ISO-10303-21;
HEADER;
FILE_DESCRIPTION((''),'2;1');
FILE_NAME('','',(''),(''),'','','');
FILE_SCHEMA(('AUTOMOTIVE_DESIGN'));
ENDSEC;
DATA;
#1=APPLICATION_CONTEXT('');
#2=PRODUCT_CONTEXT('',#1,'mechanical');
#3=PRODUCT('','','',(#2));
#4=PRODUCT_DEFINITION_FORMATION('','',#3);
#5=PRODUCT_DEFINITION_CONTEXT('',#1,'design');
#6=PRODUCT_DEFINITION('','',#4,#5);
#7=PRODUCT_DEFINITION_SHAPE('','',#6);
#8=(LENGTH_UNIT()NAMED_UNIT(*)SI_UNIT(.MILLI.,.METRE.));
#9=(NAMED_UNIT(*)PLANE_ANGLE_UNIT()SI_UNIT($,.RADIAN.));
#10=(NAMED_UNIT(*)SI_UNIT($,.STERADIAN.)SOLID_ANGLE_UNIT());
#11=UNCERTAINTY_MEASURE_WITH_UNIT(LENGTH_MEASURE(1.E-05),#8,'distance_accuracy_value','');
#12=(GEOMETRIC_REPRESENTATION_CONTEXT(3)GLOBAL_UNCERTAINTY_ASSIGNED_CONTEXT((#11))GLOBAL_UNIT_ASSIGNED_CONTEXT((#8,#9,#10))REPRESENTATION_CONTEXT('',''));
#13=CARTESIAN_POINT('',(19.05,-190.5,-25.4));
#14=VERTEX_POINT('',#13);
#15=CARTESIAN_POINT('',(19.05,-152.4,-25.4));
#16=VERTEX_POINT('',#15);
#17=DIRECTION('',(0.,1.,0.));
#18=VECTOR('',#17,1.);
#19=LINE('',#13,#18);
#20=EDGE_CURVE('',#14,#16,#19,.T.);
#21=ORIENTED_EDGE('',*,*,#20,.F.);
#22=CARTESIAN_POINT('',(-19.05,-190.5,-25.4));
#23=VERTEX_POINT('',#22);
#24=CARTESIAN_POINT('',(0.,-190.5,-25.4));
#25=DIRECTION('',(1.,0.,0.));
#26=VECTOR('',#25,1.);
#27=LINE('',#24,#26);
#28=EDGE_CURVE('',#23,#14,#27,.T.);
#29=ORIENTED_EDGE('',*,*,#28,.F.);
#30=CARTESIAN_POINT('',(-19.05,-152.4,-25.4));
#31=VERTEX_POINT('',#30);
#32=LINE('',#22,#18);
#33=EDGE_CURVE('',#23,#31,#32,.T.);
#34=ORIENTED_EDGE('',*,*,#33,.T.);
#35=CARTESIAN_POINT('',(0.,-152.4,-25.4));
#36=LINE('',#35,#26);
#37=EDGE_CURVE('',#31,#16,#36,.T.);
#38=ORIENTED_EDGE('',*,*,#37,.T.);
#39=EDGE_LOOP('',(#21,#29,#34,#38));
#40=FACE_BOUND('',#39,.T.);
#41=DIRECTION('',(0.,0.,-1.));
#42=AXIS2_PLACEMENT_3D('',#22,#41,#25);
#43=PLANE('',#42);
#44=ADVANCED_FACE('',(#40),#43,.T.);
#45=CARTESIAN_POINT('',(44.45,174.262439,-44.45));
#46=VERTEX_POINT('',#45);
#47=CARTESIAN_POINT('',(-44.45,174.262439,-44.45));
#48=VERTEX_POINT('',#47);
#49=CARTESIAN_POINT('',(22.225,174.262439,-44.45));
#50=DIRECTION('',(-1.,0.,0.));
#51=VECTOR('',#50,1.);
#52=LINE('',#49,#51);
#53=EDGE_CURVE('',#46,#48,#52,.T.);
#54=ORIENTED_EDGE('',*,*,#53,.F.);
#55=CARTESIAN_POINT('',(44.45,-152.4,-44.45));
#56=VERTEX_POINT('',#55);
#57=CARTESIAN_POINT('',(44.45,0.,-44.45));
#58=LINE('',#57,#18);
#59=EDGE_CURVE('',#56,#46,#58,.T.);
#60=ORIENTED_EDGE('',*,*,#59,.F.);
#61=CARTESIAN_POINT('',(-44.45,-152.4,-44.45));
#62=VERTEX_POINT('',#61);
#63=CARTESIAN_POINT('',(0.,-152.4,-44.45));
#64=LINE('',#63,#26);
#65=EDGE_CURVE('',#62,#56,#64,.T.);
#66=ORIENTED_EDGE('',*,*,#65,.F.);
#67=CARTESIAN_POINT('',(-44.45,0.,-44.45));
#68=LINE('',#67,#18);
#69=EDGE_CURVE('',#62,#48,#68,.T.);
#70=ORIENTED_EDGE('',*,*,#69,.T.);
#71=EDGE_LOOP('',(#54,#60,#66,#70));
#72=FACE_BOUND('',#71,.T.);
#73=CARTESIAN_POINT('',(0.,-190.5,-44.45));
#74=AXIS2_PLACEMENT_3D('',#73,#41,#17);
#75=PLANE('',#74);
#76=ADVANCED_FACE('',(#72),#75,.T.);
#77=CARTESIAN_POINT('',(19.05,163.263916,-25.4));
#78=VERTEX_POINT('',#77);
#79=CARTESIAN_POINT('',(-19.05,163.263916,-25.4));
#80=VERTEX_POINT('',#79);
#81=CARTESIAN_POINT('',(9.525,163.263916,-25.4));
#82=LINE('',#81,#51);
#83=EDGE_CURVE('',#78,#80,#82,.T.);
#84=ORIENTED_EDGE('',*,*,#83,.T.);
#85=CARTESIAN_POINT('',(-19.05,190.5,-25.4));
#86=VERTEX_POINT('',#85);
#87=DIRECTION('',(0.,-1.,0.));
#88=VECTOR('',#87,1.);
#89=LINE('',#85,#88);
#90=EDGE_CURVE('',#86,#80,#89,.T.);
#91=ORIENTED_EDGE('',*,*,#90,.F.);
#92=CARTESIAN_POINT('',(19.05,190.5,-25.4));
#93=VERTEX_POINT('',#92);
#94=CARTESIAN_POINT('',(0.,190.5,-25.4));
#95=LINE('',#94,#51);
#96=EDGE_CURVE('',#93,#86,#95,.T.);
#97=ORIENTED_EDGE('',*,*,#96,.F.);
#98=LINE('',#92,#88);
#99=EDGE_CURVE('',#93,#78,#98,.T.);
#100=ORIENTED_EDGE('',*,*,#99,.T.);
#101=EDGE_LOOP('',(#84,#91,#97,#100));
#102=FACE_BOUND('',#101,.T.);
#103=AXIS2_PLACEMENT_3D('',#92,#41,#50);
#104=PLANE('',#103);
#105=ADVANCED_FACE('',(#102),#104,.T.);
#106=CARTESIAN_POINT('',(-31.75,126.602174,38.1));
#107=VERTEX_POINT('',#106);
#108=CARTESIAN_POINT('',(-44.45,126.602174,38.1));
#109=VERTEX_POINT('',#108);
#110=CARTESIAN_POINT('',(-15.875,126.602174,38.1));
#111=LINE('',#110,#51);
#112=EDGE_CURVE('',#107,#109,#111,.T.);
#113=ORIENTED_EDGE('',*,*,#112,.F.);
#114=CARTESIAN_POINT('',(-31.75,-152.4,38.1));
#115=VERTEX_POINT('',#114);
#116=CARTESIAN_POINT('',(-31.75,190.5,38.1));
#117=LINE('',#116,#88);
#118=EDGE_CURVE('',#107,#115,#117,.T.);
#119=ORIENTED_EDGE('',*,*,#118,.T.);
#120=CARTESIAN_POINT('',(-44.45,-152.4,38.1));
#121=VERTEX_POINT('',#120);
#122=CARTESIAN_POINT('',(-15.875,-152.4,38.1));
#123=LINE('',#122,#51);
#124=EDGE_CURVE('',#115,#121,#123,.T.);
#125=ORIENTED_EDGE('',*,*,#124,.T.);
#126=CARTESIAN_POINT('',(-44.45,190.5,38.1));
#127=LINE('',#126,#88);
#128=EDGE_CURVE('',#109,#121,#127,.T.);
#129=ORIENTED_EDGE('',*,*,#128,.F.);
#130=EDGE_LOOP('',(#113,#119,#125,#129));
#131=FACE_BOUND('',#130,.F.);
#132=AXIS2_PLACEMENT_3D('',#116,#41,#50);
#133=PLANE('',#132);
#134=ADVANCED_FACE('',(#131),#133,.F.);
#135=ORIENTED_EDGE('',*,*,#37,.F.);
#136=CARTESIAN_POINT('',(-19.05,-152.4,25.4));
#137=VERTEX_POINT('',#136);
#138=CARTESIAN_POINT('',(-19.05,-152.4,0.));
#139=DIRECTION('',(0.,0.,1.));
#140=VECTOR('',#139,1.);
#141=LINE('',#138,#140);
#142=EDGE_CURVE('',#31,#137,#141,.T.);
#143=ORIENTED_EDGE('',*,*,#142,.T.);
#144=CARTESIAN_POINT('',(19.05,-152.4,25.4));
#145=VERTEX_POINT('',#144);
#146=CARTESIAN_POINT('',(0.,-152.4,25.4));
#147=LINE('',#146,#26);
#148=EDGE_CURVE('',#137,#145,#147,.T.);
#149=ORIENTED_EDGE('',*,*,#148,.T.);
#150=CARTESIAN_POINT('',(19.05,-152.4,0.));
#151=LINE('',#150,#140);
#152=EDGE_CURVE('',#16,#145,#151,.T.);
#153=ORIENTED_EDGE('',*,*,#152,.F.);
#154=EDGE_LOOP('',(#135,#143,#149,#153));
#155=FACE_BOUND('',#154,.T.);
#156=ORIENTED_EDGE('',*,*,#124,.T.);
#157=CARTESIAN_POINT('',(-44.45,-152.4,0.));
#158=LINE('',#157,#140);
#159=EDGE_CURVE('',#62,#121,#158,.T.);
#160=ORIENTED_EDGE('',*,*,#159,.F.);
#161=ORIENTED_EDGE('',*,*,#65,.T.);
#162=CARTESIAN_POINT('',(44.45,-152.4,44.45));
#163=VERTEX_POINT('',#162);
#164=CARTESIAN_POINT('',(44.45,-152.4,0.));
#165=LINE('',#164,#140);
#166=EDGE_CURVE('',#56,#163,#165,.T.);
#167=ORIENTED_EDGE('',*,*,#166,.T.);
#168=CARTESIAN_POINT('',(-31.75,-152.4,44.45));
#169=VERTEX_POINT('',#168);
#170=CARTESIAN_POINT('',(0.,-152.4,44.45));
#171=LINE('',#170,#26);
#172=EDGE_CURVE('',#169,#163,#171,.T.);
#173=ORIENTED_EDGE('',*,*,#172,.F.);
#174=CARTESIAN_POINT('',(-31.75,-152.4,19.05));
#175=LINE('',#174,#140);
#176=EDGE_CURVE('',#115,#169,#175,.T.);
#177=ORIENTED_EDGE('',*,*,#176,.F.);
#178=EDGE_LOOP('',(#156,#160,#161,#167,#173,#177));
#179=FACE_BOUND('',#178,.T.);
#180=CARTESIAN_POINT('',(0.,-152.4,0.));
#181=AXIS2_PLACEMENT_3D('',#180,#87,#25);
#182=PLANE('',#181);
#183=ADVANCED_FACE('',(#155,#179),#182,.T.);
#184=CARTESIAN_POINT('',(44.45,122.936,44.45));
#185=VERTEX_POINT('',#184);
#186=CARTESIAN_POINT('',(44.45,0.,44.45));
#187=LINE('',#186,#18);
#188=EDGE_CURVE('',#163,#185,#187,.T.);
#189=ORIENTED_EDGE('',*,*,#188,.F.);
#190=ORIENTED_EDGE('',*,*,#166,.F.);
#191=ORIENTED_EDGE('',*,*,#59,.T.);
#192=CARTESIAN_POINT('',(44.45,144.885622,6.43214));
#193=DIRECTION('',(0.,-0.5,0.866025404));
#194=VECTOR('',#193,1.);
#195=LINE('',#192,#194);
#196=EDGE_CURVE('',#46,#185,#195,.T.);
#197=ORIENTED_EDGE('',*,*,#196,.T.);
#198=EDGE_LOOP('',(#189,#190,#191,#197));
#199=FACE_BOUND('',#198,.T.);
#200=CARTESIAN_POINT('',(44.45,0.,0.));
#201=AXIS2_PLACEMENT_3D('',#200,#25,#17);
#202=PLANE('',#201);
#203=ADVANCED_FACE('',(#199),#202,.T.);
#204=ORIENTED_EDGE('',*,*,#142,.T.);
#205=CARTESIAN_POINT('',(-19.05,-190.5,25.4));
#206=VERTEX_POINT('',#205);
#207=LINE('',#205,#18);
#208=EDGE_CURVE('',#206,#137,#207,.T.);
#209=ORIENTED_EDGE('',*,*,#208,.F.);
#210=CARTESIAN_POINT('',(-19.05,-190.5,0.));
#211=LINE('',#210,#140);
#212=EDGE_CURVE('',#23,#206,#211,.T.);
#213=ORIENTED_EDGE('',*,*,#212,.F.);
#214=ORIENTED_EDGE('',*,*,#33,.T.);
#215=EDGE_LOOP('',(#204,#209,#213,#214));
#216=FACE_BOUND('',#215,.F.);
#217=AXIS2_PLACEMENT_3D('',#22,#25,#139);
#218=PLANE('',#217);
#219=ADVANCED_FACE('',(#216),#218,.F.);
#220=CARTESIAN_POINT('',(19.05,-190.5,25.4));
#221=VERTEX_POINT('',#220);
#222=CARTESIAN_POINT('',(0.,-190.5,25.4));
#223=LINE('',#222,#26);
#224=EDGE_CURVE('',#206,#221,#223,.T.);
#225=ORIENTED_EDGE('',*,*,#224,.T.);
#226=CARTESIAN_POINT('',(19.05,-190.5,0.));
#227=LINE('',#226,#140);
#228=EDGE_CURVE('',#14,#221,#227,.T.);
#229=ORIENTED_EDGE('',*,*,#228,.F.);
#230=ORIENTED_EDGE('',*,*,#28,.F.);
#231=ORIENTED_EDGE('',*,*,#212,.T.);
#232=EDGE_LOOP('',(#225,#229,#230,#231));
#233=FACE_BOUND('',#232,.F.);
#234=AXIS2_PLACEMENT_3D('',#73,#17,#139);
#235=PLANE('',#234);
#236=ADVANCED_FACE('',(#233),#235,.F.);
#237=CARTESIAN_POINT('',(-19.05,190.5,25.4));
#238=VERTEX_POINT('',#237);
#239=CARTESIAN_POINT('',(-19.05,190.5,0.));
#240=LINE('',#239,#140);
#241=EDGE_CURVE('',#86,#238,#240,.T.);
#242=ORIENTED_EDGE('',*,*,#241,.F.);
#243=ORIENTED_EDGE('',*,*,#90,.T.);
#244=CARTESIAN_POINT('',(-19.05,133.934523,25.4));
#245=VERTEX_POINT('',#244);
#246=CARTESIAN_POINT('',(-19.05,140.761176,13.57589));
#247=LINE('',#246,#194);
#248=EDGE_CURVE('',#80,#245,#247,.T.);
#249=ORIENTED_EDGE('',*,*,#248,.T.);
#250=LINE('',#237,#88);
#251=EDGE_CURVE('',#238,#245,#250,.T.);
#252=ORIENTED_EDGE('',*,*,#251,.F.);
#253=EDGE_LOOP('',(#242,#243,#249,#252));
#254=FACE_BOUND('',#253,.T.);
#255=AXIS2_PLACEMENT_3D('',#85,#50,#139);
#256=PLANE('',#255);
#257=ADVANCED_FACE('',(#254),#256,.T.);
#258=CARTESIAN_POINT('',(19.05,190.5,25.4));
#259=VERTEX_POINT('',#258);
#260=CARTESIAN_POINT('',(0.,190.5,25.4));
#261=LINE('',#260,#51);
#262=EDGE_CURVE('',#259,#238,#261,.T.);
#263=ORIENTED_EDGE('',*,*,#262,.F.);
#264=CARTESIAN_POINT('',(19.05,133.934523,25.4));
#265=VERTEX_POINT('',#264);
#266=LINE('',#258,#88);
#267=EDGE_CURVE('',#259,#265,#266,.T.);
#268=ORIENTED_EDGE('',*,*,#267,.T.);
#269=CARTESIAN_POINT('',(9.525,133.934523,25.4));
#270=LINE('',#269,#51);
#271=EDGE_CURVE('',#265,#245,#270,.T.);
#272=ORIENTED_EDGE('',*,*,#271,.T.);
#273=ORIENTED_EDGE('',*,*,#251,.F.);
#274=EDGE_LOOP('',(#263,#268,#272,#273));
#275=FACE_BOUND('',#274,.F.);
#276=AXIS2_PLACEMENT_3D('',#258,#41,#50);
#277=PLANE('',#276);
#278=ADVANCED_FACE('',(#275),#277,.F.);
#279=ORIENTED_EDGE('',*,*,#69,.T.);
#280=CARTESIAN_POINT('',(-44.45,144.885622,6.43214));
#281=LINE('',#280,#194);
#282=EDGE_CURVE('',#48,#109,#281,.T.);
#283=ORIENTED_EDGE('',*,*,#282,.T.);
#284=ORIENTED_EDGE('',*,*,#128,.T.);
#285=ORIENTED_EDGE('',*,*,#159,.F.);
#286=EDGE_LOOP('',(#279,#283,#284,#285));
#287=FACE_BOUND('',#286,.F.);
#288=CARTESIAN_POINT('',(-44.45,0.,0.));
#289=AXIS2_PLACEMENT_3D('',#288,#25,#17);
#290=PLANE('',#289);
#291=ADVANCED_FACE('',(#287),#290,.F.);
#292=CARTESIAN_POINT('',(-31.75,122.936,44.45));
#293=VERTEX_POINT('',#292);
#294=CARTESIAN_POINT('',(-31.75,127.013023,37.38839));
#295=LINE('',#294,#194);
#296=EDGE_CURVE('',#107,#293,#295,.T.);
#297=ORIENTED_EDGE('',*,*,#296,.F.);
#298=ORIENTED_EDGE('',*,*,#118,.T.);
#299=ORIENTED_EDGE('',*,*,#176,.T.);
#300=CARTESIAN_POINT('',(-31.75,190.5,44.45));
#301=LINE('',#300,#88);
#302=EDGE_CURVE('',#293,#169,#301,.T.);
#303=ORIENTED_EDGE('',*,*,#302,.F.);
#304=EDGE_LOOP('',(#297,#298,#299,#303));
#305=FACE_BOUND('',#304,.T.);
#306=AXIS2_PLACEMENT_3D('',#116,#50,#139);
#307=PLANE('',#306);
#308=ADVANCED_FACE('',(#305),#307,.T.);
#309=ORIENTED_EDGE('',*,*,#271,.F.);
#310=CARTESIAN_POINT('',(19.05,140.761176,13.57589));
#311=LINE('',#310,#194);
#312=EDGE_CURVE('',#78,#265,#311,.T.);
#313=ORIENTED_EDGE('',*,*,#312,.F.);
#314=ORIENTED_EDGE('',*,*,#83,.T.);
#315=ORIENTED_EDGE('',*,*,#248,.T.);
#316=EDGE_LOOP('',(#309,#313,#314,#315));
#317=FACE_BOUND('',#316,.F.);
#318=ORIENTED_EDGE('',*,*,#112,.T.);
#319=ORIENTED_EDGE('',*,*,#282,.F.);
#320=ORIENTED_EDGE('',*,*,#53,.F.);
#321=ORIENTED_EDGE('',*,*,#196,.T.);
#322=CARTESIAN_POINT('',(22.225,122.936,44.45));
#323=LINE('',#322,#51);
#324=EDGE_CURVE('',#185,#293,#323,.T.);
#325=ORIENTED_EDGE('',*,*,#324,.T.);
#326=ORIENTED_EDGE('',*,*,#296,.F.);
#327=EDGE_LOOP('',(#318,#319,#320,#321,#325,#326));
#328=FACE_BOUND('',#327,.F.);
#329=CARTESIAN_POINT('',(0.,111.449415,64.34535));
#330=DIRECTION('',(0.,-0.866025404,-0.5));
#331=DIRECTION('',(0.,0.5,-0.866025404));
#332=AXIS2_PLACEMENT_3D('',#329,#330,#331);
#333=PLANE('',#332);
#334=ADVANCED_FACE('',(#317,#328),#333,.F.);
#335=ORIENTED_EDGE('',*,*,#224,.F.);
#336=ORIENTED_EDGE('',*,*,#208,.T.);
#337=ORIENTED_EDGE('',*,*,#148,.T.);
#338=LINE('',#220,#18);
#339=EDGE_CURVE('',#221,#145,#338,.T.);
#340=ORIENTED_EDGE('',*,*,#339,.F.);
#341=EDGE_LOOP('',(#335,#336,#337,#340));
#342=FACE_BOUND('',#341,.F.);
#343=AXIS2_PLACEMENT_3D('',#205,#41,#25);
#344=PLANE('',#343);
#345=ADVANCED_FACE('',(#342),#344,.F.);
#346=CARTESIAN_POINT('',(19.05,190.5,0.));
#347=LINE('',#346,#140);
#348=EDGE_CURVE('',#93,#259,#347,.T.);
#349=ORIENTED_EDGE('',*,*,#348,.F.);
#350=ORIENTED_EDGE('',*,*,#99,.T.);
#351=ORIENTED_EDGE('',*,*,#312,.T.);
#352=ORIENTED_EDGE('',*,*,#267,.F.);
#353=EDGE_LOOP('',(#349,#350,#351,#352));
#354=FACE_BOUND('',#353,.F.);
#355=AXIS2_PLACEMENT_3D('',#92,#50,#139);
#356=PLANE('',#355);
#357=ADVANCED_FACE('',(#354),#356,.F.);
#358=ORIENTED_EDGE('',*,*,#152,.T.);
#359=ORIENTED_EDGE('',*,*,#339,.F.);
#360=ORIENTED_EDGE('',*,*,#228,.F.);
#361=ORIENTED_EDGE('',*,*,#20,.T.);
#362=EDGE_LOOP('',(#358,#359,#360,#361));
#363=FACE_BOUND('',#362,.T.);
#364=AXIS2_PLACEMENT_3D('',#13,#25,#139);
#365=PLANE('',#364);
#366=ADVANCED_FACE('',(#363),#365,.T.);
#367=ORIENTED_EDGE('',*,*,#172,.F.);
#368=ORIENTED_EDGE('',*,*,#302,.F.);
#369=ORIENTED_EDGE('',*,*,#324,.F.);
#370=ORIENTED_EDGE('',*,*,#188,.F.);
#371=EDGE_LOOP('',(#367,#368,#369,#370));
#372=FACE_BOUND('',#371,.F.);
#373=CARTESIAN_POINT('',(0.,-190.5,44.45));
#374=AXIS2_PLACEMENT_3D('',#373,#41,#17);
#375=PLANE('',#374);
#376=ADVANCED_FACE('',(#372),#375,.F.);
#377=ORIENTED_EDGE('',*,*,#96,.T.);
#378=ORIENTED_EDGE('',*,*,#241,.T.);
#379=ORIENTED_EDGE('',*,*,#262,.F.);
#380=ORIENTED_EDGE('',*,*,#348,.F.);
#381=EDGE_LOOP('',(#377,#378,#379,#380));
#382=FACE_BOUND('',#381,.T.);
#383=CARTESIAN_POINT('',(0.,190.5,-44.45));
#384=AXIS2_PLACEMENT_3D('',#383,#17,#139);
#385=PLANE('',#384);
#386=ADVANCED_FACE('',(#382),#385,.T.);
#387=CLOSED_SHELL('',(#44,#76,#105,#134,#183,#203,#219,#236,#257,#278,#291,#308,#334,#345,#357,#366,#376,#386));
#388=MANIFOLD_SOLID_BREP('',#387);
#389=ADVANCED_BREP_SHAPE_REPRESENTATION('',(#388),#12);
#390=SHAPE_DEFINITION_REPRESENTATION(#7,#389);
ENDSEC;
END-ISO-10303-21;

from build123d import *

# Parameters (mm, degrees)
F0_W     = 381
F0_H     = 88.9
F1_DEPTH = 44.45
F5_W     = 12.7
F5_H     = 6.35
F6_DEPTH = 381.001
F4_W     = 88.9
F4_H     = 88.9
F4_W_2   = 38.1
F4_H_2   = 50.8
F7_REACH = 193.287585695
F8_W     = 88.9
F8_H     = 88.9
F8_W_2   = 38.1
F8_H_2   = 50.8
F9_DEPTH = 38.1


with BuildPart() as f1:
    # F0 (on Right) → F1 (new body, symmetric)
    with BuildSketch(Plane.YZ):
        Rectangle(F0_W, F0_H)
    extrude(amount=F1_DEPTH, both=True)

    # F5 (on face) → F6 (cut, through all)
    with BuildSketch(Plane(origin=(0, 190.5, 0), x_dir=(-1, 0, 0), z_dir=(0, 1, 0))):
        with Locations((38.1, 41.275)):
            Rectangle(F5_W, F5_H)
    extrude(amount=-F6_DEPTH, mode=Mode.SUBTRACT)

    f7_end = Plane(origin=(0, 111.4494145991, 64.3453495198), x_dir=(0, 0.5, -0.8660254038), z_dir=(0, -0.8660254038, -0.5))
    # F4 (on face) → F7 (cut, up to a plane its end follows)
    with BuildSketch(Plane(origin=(0, 190.5, 0), x_dir=(-1, 0, 0), z_dir=(0, 1, 0))):
        Rectangle(F4_W, F4_H)
        Rectangle(F4_W_2, F4_H_2, mode=Mode.SUBTRACT)
    f7_long = extrude(amount=-F7_REACH, mode=Mode.PRIVATE)
    add(split(f7_long, bisect_by=f7_end, keep=Keep.BOTTOM, mode=Mode.PRIVATE), mode=Mode.SUBTRACT)

    # F8 (on face) → F9 (cut)
    with BuildSketch(Plane.XZ.offset(190.5)):
        Rectangle(F8_W, F8_H)
        Rectangle(F8_W_2, F8_H_2, mode=Mode.SUBTRACT)
    extrude(amount=-F9_DEPTH, mode=Mode.SUBTRACT)


solid = f1.part
